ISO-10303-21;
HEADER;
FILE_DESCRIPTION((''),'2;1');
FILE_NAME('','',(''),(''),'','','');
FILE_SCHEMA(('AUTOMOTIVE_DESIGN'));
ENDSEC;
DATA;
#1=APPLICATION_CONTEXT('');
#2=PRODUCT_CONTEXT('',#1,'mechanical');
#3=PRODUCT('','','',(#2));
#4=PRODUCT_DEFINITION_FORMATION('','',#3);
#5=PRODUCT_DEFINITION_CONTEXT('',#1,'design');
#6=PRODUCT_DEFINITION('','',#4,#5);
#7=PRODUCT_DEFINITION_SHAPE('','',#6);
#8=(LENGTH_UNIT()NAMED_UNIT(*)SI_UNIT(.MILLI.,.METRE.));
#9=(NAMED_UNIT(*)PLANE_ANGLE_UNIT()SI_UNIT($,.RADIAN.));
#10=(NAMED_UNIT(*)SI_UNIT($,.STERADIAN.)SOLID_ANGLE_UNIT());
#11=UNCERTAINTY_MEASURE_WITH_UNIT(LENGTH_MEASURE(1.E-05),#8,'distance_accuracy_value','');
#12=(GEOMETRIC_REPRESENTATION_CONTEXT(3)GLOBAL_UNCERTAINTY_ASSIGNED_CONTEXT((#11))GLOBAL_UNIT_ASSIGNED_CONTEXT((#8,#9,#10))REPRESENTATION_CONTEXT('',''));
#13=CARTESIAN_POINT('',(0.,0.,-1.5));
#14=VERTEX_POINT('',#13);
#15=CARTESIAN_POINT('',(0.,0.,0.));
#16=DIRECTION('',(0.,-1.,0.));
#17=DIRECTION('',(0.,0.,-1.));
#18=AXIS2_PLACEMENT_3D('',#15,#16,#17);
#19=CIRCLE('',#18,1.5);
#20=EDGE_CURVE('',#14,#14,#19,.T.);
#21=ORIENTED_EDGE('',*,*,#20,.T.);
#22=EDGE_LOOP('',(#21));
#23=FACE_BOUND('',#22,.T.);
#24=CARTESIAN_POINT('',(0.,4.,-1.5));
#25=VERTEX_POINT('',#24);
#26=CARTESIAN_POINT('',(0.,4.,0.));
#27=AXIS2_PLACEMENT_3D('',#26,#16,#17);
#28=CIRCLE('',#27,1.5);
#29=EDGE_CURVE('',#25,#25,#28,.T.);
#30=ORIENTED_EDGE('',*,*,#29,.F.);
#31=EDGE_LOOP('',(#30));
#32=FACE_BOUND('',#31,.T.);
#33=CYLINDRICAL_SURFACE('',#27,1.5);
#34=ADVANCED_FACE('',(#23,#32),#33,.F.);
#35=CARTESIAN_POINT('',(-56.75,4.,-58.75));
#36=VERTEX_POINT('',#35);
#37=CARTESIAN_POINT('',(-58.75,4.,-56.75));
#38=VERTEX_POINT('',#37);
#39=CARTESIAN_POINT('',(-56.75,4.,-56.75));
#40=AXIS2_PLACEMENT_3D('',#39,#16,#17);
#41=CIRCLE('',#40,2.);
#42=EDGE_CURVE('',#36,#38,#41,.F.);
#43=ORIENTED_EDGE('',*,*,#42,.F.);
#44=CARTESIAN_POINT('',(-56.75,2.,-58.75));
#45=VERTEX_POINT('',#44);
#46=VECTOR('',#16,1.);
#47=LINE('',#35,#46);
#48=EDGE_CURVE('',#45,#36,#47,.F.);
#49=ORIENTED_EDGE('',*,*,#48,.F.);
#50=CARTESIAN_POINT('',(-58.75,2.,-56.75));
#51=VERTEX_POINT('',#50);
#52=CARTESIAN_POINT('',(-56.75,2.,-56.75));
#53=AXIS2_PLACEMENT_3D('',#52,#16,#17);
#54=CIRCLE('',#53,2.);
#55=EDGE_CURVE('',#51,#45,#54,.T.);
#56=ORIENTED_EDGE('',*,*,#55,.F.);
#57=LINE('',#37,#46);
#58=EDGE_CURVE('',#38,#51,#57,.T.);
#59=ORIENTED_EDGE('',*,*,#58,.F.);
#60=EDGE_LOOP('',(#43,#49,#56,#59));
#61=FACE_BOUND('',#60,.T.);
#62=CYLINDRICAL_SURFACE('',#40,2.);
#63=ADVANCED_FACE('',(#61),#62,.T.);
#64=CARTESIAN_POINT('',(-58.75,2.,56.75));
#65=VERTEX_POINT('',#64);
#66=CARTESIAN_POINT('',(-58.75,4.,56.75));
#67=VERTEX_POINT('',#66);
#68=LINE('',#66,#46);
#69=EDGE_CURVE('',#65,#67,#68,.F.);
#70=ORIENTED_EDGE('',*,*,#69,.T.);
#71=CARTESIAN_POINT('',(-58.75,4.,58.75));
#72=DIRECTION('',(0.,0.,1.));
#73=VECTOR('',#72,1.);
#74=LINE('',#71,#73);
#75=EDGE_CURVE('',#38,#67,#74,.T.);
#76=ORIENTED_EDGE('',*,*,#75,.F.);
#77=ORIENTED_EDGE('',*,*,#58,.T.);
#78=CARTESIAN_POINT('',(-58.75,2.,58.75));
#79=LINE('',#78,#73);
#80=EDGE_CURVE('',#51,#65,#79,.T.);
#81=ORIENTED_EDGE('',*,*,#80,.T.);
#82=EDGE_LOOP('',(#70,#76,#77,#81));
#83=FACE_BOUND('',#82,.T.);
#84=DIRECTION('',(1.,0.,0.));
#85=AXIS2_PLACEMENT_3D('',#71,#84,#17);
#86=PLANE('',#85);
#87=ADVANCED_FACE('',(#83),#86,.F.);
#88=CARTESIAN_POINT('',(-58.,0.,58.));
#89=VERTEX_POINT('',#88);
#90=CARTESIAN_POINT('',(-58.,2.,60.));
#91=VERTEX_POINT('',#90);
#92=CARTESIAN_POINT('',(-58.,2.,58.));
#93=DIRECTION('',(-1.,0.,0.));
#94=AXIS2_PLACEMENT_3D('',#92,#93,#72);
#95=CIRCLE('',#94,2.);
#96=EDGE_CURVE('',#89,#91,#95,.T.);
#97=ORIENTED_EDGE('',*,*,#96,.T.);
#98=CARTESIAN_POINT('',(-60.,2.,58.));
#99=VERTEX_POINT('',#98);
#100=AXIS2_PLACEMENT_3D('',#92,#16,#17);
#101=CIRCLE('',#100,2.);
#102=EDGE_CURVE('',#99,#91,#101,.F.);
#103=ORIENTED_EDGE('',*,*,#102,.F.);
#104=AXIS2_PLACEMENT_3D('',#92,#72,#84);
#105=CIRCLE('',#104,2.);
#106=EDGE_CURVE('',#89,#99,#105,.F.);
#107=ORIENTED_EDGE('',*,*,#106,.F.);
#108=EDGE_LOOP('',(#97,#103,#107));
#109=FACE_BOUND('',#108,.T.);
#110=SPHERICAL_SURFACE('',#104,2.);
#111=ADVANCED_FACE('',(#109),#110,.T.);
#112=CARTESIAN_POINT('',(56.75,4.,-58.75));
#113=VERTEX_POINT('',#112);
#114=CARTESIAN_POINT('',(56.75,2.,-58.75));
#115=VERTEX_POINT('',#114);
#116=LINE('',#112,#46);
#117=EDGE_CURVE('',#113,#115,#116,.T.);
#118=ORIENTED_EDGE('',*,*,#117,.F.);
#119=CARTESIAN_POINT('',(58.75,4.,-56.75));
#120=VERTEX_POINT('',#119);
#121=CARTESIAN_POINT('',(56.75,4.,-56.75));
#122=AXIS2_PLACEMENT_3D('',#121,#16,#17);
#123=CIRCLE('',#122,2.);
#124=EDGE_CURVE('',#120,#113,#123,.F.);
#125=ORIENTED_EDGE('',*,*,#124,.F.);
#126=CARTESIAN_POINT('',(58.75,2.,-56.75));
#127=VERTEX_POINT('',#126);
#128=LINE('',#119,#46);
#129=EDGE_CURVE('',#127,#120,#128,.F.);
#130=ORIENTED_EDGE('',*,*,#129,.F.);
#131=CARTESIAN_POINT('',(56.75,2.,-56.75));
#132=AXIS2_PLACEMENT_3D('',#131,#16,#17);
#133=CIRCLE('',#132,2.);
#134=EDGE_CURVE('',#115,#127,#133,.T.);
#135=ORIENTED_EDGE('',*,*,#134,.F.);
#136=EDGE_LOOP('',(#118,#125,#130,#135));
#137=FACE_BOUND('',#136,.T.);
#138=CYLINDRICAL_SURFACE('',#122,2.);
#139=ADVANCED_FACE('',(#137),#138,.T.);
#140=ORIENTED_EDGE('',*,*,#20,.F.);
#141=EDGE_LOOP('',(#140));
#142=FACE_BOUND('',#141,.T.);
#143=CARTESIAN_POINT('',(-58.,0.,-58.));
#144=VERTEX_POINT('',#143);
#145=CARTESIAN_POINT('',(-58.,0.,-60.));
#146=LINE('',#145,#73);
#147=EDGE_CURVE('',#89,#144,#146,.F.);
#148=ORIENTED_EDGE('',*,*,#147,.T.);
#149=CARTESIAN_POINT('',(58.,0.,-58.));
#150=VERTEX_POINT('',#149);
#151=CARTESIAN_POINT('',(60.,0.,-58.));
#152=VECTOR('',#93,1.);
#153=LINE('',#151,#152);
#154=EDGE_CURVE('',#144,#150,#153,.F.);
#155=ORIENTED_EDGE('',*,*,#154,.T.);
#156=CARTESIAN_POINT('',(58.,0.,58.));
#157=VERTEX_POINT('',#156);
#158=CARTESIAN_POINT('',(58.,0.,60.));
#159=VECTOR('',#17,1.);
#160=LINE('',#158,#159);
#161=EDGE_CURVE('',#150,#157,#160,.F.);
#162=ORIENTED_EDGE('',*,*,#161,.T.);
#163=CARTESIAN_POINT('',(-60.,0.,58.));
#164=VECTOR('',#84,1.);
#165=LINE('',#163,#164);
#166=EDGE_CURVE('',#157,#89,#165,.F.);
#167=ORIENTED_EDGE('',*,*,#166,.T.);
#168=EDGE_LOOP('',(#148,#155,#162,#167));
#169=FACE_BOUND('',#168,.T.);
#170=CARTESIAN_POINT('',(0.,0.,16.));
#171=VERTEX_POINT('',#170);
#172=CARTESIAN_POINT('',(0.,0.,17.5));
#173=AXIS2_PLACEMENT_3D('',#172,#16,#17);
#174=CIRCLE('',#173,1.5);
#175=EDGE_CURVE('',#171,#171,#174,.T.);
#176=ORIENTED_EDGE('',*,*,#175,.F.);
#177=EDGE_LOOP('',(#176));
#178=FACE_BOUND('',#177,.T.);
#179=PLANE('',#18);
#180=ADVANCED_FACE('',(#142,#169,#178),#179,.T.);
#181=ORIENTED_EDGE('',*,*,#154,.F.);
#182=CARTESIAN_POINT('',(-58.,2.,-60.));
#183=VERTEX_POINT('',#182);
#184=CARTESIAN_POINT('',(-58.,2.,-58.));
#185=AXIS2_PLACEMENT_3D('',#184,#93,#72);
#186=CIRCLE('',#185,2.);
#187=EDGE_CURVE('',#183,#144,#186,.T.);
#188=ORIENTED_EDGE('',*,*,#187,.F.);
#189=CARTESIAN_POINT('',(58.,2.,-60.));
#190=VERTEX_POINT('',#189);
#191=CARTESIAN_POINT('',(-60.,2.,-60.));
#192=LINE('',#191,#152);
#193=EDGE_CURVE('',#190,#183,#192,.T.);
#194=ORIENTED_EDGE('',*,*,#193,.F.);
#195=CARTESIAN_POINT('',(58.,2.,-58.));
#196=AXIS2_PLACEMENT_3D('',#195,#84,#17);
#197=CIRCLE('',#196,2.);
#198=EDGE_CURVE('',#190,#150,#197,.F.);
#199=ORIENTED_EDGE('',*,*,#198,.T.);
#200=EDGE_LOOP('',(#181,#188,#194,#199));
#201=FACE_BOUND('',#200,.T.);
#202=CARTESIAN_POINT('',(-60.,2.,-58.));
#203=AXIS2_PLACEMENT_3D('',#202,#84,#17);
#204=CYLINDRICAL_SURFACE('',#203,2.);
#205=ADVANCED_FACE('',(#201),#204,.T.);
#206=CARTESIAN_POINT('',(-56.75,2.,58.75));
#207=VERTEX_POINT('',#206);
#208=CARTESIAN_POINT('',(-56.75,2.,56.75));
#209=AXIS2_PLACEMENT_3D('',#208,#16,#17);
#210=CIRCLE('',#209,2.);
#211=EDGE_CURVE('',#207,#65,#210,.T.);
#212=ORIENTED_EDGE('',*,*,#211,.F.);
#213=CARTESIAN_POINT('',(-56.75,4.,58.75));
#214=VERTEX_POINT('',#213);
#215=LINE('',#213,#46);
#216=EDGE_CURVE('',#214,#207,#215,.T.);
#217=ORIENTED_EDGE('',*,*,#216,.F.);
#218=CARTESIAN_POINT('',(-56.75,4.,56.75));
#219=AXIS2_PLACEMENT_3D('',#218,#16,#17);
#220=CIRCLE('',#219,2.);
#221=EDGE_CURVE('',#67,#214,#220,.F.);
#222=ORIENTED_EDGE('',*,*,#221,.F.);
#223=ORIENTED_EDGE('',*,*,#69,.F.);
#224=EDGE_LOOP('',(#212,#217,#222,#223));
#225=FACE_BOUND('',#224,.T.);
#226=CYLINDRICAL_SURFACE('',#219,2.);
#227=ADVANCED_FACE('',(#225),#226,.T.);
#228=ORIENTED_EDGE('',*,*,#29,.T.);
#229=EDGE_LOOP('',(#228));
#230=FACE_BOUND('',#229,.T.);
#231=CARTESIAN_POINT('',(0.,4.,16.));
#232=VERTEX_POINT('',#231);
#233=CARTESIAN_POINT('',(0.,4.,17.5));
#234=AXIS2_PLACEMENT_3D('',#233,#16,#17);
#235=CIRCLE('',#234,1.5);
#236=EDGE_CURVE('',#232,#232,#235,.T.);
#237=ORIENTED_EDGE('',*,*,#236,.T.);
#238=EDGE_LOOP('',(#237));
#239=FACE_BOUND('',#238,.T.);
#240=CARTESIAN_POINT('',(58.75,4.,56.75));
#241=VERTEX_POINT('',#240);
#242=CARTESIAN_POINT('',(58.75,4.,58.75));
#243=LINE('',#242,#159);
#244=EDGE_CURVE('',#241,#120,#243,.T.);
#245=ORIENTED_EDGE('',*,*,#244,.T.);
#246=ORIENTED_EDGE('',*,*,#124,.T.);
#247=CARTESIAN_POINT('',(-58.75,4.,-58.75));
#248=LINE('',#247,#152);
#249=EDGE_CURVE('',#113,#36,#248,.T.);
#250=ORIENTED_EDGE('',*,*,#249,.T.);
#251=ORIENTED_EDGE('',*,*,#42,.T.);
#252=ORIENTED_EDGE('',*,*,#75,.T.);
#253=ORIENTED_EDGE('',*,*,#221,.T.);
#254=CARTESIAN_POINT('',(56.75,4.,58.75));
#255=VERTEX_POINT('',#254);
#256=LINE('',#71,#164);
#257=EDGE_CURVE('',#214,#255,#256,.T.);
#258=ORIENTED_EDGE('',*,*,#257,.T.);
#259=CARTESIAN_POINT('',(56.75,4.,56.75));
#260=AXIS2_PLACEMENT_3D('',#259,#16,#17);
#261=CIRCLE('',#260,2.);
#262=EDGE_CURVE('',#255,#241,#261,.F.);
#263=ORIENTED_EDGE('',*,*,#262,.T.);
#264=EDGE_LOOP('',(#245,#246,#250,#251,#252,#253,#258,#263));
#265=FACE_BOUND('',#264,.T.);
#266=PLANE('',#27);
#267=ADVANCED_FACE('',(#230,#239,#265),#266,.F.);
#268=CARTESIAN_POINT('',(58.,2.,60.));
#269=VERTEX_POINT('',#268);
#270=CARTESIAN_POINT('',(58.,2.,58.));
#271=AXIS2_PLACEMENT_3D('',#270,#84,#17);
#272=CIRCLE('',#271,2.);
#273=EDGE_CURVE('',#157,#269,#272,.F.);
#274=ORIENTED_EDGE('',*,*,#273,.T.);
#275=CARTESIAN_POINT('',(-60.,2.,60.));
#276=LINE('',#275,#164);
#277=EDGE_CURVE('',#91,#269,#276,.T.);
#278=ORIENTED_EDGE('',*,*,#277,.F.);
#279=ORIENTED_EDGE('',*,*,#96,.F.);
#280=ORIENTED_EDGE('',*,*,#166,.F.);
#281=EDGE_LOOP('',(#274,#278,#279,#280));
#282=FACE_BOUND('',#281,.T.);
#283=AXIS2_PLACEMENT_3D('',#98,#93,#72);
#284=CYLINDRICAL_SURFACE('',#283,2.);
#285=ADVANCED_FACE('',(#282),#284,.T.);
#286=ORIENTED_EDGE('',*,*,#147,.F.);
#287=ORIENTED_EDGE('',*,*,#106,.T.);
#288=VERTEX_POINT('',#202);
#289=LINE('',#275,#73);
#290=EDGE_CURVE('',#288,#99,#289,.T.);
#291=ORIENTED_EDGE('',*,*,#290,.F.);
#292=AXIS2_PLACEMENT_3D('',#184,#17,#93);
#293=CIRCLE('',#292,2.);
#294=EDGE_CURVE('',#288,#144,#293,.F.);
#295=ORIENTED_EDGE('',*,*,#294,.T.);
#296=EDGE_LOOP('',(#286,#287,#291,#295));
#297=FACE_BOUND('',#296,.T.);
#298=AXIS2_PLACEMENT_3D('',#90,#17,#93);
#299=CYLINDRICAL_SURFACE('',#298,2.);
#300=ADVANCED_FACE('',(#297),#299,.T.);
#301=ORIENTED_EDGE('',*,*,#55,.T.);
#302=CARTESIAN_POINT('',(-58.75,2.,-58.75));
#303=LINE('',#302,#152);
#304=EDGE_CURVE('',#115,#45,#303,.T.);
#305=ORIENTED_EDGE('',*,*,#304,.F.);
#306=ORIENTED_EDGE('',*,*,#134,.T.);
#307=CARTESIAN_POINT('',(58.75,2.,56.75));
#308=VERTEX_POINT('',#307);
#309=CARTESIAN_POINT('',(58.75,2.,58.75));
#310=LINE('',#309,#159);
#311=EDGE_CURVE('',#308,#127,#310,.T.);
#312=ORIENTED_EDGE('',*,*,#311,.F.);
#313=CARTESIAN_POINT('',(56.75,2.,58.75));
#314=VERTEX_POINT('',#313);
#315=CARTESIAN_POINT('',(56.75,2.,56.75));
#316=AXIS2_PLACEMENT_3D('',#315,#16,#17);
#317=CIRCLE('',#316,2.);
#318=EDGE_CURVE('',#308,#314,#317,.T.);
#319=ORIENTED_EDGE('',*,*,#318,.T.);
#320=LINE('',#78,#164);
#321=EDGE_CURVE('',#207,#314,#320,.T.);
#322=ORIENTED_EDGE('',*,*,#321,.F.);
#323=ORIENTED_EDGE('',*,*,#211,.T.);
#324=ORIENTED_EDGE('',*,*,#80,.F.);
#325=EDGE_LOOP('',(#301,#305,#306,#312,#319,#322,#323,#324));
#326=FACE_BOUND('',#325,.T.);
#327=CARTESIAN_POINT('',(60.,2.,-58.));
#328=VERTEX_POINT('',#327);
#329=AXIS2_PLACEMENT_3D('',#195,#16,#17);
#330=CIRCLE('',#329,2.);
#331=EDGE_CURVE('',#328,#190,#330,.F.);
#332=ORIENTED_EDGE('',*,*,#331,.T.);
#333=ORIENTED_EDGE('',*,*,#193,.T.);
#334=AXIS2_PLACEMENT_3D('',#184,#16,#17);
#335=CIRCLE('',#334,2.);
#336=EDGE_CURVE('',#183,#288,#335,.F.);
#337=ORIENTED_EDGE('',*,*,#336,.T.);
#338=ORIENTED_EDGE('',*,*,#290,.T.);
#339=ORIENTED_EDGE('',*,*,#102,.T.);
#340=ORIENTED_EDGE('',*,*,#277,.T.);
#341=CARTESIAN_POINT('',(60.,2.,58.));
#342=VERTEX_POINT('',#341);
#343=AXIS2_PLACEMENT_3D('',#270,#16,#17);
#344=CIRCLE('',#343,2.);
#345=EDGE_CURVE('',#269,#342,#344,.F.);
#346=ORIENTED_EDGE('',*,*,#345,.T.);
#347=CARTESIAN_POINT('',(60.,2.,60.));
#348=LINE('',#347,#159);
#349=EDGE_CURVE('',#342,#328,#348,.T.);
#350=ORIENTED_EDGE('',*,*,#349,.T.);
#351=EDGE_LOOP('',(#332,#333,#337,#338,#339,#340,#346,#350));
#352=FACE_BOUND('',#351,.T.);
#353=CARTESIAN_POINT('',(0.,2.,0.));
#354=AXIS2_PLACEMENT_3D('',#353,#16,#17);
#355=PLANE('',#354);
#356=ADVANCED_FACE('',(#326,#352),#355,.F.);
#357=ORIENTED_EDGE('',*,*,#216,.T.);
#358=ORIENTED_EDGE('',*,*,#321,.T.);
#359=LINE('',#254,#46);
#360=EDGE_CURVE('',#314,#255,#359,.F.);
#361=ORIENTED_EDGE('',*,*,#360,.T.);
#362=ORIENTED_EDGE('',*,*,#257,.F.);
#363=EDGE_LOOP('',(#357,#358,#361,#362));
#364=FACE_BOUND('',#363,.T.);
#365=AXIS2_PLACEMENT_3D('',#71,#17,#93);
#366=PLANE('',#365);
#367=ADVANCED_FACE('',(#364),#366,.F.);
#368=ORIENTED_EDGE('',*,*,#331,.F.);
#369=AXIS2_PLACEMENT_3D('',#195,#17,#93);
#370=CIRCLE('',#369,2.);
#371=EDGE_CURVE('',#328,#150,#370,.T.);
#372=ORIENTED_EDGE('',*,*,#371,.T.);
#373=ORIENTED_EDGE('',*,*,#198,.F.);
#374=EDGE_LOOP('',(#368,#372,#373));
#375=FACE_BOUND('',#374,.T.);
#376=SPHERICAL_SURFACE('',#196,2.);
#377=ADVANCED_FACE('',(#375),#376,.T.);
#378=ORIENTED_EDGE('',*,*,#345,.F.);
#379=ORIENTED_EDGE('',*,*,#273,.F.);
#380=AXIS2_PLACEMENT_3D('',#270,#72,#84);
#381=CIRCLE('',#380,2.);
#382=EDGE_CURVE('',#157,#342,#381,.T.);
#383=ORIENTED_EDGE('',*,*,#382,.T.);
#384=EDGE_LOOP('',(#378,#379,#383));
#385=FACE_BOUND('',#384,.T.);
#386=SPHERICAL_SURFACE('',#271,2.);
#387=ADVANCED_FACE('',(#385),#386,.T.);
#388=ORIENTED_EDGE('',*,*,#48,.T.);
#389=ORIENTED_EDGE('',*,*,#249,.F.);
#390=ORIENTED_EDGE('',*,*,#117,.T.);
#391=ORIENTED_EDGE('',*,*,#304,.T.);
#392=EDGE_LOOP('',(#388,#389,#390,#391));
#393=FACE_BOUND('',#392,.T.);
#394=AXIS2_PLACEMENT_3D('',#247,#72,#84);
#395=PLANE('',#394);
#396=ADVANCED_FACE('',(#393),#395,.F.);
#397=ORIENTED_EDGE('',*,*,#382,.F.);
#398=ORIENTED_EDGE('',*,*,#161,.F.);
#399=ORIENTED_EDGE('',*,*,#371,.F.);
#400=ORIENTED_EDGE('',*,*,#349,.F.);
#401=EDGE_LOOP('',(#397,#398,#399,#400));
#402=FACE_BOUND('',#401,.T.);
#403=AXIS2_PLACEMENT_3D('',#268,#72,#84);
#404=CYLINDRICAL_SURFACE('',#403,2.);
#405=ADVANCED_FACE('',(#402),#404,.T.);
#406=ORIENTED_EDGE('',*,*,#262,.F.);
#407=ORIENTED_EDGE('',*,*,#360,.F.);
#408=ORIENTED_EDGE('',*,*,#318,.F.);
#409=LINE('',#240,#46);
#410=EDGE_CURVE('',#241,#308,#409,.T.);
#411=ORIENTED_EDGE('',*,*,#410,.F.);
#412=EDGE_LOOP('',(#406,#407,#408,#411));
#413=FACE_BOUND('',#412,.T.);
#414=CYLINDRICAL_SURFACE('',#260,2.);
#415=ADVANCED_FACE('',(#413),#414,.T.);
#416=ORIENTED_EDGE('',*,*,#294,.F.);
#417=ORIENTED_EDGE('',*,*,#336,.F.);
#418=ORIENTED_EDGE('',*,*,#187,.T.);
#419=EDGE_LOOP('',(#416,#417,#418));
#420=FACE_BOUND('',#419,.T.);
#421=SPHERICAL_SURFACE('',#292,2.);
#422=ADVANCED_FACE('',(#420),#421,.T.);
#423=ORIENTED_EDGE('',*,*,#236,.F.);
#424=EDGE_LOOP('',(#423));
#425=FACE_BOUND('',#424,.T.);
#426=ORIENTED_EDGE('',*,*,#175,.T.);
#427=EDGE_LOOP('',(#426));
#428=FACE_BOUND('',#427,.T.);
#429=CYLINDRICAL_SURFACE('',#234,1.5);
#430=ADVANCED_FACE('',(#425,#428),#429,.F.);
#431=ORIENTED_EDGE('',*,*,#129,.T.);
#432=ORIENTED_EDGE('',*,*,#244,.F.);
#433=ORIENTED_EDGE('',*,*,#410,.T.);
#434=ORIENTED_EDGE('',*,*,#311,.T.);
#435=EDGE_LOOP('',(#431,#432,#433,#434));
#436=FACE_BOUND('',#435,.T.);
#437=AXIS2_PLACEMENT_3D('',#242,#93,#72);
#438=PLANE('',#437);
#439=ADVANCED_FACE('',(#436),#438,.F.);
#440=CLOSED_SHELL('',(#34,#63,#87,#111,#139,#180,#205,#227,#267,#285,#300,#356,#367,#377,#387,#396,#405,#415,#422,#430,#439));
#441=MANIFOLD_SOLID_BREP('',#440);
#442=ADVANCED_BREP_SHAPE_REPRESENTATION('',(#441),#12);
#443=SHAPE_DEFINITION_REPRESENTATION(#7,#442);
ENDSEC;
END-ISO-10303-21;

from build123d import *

# Parameters (mm, degrees)
SKETCH1_W           = 120
SKETCH1_H           = 120
BOSS_EXTRUDE1_DEPTH = 2
SKETCH2_W           = 117.5
SKETCH2_H           = 117.5
BOSS_EXTRUDE2_DEPTH = 2
FILLET1_R           = 2
SKETCH4_R           = 1.5
CUT_EXTRUDE1_DEPTH  = 85.947042326


with BuildPart() as part:
    # Sketch1 → Boss-Extrude1 (new body)
    with BuildSketch(Plane(origin=(0, 0, 0), x_dir=(1, 0, 0), z_dir=(0, 1, 0))):
        Rectangle(SKETCH1_W, SKETCH1_H)
    extrude(amount=BOSS_EXTRUDE1_DEPTH)

    # Sketch2 → Boss-Extrude2 (add)
    with BuildSketch(Plane(origin=(0, 2, 0), x_dir=(1, 0, 0), z_dir=(0, 1, 0))):
        Rectangle(SKETCH2_W, SKETCH2_H)
    extrude(amount=BOSS_EXTRUDE2_DEPTH)

    # Fillet1
    fillet1_edges = [part.edges().sort_by_distance(p)[0] for p in [
        (58.75, 3, 58.75),
        (58.75, 3, -58.75),
        (-58.75, 3, -58.75),
        (-58.75, 3, 58.75),
        (0, 0, 60),
        (-60, 0, 0),
        (0, 0, -60),
        (60, 0, 0),
        (60, 1, 60),
        (-60, 1, 60),
        (-60, 1, -60),
        (60, 1, -60),
    ]]
    fillet(fillet1_edges, radius=FILLET1_R - 0.0001)  # a hair under: the kernel refuses the full size

    # Sketch4 → Cut-Extrude1 (cut, through all)
    with BuildSketch(Plane.XZ):
        with Locations(Location((0, 0, 0), (0, 0, 270))):
            Circle(SKETCH4_R)
        with Locations(Location((0, 17.5, 0), (0, 0, 270))):
            Circle(SKETCH4_R)
    extrude(amount=-CUT_EXTRUDE1_DEPTH, mode=Mode.SUBTRACT)


solid = part.part
